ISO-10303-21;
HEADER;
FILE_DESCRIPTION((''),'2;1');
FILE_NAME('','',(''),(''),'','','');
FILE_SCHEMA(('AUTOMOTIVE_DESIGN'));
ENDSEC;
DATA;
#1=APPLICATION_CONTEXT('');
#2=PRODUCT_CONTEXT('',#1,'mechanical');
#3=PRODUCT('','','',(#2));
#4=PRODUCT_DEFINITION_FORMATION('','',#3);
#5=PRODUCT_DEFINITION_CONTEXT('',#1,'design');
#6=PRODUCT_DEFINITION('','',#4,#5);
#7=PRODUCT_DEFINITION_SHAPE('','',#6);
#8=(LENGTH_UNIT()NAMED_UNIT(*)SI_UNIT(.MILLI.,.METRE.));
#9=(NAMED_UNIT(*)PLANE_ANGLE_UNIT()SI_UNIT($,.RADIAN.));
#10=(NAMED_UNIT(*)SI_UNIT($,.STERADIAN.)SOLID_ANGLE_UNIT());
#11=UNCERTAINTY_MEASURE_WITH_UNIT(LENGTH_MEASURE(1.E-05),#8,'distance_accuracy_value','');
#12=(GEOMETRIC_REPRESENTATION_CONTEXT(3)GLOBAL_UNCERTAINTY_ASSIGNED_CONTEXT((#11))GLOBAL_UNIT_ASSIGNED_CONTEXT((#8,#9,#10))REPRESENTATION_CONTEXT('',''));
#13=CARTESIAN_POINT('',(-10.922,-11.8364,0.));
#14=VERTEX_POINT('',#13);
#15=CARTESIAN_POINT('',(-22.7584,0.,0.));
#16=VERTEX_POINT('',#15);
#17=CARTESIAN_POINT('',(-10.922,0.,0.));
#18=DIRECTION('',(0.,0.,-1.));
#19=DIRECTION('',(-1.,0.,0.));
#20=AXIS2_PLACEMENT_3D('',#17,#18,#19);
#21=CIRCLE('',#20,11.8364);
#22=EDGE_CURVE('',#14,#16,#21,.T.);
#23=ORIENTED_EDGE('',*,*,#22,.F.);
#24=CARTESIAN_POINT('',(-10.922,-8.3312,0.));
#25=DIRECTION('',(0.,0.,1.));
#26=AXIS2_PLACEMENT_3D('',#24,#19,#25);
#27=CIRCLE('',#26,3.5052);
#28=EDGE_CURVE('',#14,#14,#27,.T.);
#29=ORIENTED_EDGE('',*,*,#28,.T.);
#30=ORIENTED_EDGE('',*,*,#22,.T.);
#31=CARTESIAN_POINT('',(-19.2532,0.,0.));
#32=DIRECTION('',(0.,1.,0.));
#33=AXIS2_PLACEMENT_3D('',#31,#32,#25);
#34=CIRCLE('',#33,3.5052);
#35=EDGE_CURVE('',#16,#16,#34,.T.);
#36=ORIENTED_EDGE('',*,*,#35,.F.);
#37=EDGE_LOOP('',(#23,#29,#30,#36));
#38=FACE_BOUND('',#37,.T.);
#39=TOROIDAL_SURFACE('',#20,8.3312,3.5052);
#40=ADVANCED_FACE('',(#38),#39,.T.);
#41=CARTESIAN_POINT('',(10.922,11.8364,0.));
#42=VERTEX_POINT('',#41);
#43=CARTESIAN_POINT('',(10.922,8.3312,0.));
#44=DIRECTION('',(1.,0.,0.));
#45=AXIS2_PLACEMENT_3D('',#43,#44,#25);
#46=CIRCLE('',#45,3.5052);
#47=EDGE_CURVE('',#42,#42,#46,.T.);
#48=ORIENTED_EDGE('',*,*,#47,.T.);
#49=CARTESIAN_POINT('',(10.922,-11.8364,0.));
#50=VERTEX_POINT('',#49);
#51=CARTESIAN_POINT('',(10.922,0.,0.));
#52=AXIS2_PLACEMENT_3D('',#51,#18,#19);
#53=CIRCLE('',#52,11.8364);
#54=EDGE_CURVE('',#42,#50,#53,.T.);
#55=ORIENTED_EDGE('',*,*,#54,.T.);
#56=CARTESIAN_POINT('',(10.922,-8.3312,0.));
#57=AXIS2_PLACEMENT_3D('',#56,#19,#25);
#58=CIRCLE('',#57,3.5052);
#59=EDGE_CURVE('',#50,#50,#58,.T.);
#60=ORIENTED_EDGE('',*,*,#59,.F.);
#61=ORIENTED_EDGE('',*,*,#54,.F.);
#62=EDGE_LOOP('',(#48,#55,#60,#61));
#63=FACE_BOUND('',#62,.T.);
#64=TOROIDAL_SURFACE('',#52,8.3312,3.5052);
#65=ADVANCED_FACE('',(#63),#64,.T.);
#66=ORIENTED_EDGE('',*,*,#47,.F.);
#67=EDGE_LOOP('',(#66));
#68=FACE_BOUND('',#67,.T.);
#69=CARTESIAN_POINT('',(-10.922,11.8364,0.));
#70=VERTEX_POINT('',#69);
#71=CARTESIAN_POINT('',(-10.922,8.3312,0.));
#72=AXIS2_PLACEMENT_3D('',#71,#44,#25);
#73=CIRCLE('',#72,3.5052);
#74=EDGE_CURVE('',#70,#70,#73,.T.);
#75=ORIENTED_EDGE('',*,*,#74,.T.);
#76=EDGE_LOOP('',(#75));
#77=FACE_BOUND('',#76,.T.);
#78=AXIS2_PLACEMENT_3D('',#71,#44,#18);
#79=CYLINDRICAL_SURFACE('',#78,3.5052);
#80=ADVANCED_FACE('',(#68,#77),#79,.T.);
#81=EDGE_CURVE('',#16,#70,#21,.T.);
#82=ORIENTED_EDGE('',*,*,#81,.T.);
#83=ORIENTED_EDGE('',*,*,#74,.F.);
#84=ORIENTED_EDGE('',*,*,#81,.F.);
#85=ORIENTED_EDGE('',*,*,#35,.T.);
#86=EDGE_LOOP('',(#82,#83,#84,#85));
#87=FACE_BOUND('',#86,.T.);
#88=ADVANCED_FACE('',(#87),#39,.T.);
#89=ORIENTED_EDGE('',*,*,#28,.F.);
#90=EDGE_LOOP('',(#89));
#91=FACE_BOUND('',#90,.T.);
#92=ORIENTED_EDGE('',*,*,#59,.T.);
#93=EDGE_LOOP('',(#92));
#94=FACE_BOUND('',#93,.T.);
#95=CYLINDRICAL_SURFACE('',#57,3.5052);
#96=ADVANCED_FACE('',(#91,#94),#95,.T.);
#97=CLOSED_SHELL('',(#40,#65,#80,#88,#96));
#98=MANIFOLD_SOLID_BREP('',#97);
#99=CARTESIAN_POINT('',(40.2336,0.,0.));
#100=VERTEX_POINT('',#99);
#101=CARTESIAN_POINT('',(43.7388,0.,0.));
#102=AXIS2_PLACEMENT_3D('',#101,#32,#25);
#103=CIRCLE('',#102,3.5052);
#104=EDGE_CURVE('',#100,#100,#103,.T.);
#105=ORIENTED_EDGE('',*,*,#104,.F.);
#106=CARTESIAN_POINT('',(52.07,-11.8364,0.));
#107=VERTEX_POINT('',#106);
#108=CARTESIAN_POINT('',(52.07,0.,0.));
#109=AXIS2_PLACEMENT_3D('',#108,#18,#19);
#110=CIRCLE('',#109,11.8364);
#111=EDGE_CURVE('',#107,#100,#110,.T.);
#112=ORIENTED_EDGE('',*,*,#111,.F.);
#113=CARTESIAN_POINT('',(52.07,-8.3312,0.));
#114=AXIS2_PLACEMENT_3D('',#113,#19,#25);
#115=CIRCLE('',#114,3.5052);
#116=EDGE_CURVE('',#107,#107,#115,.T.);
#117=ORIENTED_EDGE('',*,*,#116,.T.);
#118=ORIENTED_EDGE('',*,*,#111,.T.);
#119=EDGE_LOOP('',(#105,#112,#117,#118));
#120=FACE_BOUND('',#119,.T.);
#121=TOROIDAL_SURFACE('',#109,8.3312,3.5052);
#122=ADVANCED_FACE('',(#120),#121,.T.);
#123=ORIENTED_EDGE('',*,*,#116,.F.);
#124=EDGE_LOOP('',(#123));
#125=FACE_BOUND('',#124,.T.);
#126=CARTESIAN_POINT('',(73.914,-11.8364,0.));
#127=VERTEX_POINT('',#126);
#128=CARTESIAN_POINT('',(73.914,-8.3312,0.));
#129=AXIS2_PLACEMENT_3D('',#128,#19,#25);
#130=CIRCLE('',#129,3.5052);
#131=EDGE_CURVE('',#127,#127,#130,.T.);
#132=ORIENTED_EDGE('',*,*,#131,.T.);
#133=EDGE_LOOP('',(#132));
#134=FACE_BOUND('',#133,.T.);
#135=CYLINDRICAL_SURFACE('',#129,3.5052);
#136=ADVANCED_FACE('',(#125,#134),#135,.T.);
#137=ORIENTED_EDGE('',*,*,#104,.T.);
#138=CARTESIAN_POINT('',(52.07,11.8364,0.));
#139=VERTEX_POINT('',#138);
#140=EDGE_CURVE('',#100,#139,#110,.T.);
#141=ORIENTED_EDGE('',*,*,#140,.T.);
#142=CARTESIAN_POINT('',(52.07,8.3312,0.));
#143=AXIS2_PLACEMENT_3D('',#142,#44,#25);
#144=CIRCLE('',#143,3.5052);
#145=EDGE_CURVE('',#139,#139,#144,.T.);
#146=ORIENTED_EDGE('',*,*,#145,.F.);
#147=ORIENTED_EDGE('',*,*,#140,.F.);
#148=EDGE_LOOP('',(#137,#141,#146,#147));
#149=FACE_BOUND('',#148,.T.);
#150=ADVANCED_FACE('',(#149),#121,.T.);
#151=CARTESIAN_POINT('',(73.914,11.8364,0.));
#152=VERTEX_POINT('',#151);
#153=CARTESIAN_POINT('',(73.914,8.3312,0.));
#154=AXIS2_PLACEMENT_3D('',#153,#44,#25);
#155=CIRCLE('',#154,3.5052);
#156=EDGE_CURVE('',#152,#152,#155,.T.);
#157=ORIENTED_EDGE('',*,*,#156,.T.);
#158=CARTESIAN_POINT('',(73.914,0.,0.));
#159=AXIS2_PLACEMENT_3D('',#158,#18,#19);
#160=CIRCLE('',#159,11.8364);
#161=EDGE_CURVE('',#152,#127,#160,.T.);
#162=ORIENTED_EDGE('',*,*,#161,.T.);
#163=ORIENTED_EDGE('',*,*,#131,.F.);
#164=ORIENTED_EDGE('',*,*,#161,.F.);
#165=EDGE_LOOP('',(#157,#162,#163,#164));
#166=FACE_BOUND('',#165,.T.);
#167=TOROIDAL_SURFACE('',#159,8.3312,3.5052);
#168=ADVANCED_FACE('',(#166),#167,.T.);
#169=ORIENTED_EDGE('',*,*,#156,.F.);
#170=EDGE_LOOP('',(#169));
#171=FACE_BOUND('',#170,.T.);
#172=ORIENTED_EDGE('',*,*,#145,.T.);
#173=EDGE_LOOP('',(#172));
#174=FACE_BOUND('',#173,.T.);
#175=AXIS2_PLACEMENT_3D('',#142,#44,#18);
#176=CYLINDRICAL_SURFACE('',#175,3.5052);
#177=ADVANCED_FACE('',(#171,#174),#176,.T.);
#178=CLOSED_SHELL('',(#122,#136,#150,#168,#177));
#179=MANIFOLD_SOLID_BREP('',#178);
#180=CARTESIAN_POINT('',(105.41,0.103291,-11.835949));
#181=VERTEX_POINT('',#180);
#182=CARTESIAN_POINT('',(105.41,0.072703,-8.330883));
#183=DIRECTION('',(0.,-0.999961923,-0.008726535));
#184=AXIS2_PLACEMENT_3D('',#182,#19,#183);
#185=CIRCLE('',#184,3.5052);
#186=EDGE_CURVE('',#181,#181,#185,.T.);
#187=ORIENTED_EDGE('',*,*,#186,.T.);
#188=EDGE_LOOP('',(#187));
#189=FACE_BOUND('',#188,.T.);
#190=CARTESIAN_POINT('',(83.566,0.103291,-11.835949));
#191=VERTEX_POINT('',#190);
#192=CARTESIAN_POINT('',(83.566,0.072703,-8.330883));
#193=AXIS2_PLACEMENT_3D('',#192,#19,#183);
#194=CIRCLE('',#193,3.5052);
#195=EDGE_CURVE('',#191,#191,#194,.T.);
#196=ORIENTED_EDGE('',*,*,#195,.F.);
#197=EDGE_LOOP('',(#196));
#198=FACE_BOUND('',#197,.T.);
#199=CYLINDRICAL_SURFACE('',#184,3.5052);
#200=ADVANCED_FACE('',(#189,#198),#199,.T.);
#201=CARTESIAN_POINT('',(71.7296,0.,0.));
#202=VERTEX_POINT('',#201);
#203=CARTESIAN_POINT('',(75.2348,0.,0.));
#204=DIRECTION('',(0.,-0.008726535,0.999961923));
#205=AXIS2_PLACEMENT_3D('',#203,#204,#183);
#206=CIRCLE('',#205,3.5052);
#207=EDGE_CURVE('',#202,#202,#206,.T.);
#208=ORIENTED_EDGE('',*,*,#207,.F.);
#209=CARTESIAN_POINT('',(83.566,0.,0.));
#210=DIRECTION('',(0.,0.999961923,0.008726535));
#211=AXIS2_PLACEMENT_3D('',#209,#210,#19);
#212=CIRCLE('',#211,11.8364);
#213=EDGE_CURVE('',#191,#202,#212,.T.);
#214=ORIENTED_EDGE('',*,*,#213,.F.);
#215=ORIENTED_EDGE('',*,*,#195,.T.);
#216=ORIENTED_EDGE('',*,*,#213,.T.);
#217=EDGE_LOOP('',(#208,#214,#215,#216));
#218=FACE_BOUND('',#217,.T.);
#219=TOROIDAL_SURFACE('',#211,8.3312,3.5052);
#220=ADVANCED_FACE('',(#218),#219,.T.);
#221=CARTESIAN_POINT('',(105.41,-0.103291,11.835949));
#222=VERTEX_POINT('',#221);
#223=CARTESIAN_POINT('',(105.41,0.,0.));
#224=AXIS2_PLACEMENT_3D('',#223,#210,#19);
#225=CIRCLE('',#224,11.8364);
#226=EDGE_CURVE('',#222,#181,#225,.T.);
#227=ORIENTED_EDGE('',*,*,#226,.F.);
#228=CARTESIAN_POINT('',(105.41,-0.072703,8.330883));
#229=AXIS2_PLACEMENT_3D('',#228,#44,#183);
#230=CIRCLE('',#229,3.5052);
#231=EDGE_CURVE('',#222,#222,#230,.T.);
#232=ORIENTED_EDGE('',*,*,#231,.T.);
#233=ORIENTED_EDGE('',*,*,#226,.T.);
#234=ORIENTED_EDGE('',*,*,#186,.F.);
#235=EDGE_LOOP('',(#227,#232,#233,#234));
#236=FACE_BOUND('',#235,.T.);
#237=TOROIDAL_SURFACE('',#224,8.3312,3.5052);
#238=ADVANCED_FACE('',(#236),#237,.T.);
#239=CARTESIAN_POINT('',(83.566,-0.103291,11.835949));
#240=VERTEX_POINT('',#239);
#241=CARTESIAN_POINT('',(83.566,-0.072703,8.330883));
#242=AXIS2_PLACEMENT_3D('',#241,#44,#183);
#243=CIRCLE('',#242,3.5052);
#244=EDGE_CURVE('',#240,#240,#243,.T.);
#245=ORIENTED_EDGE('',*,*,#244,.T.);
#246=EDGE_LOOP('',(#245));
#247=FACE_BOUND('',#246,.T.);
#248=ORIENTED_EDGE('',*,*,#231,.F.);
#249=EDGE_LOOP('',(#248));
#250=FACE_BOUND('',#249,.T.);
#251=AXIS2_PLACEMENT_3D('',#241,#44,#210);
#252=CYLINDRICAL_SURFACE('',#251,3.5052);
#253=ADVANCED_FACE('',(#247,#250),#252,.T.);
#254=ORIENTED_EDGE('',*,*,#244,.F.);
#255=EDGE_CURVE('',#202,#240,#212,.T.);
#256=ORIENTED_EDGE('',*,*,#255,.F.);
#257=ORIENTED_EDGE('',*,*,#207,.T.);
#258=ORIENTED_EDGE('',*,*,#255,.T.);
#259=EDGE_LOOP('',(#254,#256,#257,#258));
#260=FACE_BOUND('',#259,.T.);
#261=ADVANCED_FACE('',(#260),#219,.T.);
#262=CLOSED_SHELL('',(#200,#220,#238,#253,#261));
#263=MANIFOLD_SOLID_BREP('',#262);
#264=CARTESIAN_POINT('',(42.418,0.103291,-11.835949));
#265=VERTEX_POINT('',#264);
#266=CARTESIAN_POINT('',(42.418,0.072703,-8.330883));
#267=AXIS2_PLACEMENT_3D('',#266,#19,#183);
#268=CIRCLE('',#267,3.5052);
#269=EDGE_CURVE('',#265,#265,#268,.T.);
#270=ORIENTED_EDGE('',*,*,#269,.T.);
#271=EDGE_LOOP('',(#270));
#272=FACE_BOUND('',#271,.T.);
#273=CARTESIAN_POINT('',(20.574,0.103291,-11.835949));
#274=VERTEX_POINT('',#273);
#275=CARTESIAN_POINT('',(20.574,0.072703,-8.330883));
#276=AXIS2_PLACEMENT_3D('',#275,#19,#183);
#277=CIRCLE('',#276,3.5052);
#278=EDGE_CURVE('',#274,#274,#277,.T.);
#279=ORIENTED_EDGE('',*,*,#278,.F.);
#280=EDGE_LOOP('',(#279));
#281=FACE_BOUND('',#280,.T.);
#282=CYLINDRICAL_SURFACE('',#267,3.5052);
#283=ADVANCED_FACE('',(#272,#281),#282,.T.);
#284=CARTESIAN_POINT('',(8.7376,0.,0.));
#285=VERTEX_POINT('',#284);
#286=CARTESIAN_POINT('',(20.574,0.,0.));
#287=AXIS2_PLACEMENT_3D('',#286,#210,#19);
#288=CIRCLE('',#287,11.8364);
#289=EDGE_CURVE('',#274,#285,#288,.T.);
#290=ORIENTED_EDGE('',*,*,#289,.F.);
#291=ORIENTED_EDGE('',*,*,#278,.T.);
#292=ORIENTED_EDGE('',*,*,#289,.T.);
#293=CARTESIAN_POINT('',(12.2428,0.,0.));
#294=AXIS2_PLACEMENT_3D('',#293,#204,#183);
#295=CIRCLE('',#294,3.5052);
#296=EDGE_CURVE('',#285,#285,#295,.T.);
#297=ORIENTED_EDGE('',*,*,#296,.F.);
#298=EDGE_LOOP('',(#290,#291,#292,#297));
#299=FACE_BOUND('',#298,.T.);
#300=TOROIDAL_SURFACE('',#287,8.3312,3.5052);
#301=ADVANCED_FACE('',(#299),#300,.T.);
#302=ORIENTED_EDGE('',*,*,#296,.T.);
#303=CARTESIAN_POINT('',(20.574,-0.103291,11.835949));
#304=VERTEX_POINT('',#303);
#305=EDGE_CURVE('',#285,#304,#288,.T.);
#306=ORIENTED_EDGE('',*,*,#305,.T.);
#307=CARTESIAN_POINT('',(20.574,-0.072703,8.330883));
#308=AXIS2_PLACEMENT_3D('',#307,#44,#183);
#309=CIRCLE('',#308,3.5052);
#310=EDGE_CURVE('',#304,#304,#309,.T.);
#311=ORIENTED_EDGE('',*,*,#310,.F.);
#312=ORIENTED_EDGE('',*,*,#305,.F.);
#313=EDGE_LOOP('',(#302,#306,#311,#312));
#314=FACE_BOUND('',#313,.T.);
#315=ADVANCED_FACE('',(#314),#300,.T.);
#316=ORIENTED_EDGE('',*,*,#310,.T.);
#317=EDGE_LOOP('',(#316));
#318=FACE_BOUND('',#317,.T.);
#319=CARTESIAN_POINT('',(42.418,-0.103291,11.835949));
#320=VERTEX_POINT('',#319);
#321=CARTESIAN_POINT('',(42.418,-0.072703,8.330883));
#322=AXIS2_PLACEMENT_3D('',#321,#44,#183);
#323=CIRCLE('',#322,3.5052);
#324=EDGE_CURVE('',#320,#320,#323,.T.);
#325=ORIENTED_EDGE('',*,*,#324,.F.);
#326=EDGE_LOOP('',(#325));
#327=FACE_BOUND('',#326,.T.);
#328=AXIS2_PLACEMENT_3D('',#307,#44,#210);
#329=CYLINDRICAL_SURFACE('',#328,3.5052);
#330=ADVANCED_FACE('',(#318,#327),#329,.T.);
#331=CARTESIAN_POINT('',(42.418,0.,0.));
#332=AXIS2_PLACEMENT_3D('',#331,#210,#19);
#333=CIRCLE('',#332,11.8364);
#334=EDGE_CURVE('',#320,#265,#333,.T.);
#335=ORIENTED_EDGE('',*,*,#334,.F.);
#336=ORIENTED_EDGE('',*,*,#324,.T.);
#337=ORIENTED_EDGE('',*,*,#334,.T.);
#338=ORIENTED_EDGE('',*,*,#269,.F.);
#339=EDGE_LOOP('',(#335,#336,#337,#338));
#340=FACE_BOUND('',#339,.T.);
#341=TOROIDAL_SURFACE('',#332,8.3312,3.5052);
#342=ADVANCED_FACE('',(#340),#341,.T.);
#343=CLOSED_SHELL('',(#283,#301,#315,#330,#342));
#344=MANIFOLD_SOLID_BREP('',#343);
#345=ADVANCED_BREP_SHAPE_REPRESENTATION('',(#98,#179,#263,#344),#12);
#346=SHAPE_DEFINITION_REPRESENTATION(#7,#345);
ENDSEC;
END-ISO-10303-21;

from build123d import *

# Parameters (mm, degrees)
SKETCH2_R             = 3.5052
BODY_MOVE_COPY2_ANGLE = 90.5


with BuildPart() as part:
    # Sweep1: sweep along a path in Sketch1
    with BuildLine(Plane.XY) as sweep1_path:
        Line((-10.922, 4.826), (10.922, 4.826))
        ThreePointArc((10.922, 4.826), (15.748, 0), (10.922, -4.826))
        Line((10.922, -4.826), (-10.922, -4.826))
        ThreePointArc((-10.922, -4.826), (-15.748, 0), (-10.922, 4.826))
    # Sketch2 → Sweep1 (sweep)
    with BuildSketch(Plane(origin=(0, 0, 0), x_dir=(1, 0, 0), z_dir=(0, 1, 0))):
        with Locations((-19.2532, 0)):
            Circle(SKETCH2_R)
    sweep(path=sweep1_path.line)


with BuildPart() as body_2:
    # Body-Move/Copy1: read off the stored shape, not the designer's step
    # Body-Move/Copy1: copy of part
    add(part.part.moved(Location((62.992, 0, 0))))


with BuildPart() as body_3:
    # Body-Move_Copy1 2: copy of part
    add(part.part.moved(Location((94.488, 0, 0))))


with BuildPart() as body_4:
    # Body-Move_Copy1 3: copy of part
    add(part.part.moved(Location((31.496, 0, 0))))


with BuildPart() as body_4_1:
    # Body-Move/Copy2: moved
    add(body_4.part.rotate(Axis((0, 0, 0), (1, 0, 0)), BODY_MOVE_COPY2_ANGLE))


with BuildPart() as body_3_1:
    # Body-Move/Copy2: moved
    add(body_3.part.rotate(Axis((0, 0, 0), (1, 0, 0)), BODY_MOVE_COPY2_ANGLE))


solid = Compound([part.part, body_2.part, body_4_1.part, body_3_1.part])
